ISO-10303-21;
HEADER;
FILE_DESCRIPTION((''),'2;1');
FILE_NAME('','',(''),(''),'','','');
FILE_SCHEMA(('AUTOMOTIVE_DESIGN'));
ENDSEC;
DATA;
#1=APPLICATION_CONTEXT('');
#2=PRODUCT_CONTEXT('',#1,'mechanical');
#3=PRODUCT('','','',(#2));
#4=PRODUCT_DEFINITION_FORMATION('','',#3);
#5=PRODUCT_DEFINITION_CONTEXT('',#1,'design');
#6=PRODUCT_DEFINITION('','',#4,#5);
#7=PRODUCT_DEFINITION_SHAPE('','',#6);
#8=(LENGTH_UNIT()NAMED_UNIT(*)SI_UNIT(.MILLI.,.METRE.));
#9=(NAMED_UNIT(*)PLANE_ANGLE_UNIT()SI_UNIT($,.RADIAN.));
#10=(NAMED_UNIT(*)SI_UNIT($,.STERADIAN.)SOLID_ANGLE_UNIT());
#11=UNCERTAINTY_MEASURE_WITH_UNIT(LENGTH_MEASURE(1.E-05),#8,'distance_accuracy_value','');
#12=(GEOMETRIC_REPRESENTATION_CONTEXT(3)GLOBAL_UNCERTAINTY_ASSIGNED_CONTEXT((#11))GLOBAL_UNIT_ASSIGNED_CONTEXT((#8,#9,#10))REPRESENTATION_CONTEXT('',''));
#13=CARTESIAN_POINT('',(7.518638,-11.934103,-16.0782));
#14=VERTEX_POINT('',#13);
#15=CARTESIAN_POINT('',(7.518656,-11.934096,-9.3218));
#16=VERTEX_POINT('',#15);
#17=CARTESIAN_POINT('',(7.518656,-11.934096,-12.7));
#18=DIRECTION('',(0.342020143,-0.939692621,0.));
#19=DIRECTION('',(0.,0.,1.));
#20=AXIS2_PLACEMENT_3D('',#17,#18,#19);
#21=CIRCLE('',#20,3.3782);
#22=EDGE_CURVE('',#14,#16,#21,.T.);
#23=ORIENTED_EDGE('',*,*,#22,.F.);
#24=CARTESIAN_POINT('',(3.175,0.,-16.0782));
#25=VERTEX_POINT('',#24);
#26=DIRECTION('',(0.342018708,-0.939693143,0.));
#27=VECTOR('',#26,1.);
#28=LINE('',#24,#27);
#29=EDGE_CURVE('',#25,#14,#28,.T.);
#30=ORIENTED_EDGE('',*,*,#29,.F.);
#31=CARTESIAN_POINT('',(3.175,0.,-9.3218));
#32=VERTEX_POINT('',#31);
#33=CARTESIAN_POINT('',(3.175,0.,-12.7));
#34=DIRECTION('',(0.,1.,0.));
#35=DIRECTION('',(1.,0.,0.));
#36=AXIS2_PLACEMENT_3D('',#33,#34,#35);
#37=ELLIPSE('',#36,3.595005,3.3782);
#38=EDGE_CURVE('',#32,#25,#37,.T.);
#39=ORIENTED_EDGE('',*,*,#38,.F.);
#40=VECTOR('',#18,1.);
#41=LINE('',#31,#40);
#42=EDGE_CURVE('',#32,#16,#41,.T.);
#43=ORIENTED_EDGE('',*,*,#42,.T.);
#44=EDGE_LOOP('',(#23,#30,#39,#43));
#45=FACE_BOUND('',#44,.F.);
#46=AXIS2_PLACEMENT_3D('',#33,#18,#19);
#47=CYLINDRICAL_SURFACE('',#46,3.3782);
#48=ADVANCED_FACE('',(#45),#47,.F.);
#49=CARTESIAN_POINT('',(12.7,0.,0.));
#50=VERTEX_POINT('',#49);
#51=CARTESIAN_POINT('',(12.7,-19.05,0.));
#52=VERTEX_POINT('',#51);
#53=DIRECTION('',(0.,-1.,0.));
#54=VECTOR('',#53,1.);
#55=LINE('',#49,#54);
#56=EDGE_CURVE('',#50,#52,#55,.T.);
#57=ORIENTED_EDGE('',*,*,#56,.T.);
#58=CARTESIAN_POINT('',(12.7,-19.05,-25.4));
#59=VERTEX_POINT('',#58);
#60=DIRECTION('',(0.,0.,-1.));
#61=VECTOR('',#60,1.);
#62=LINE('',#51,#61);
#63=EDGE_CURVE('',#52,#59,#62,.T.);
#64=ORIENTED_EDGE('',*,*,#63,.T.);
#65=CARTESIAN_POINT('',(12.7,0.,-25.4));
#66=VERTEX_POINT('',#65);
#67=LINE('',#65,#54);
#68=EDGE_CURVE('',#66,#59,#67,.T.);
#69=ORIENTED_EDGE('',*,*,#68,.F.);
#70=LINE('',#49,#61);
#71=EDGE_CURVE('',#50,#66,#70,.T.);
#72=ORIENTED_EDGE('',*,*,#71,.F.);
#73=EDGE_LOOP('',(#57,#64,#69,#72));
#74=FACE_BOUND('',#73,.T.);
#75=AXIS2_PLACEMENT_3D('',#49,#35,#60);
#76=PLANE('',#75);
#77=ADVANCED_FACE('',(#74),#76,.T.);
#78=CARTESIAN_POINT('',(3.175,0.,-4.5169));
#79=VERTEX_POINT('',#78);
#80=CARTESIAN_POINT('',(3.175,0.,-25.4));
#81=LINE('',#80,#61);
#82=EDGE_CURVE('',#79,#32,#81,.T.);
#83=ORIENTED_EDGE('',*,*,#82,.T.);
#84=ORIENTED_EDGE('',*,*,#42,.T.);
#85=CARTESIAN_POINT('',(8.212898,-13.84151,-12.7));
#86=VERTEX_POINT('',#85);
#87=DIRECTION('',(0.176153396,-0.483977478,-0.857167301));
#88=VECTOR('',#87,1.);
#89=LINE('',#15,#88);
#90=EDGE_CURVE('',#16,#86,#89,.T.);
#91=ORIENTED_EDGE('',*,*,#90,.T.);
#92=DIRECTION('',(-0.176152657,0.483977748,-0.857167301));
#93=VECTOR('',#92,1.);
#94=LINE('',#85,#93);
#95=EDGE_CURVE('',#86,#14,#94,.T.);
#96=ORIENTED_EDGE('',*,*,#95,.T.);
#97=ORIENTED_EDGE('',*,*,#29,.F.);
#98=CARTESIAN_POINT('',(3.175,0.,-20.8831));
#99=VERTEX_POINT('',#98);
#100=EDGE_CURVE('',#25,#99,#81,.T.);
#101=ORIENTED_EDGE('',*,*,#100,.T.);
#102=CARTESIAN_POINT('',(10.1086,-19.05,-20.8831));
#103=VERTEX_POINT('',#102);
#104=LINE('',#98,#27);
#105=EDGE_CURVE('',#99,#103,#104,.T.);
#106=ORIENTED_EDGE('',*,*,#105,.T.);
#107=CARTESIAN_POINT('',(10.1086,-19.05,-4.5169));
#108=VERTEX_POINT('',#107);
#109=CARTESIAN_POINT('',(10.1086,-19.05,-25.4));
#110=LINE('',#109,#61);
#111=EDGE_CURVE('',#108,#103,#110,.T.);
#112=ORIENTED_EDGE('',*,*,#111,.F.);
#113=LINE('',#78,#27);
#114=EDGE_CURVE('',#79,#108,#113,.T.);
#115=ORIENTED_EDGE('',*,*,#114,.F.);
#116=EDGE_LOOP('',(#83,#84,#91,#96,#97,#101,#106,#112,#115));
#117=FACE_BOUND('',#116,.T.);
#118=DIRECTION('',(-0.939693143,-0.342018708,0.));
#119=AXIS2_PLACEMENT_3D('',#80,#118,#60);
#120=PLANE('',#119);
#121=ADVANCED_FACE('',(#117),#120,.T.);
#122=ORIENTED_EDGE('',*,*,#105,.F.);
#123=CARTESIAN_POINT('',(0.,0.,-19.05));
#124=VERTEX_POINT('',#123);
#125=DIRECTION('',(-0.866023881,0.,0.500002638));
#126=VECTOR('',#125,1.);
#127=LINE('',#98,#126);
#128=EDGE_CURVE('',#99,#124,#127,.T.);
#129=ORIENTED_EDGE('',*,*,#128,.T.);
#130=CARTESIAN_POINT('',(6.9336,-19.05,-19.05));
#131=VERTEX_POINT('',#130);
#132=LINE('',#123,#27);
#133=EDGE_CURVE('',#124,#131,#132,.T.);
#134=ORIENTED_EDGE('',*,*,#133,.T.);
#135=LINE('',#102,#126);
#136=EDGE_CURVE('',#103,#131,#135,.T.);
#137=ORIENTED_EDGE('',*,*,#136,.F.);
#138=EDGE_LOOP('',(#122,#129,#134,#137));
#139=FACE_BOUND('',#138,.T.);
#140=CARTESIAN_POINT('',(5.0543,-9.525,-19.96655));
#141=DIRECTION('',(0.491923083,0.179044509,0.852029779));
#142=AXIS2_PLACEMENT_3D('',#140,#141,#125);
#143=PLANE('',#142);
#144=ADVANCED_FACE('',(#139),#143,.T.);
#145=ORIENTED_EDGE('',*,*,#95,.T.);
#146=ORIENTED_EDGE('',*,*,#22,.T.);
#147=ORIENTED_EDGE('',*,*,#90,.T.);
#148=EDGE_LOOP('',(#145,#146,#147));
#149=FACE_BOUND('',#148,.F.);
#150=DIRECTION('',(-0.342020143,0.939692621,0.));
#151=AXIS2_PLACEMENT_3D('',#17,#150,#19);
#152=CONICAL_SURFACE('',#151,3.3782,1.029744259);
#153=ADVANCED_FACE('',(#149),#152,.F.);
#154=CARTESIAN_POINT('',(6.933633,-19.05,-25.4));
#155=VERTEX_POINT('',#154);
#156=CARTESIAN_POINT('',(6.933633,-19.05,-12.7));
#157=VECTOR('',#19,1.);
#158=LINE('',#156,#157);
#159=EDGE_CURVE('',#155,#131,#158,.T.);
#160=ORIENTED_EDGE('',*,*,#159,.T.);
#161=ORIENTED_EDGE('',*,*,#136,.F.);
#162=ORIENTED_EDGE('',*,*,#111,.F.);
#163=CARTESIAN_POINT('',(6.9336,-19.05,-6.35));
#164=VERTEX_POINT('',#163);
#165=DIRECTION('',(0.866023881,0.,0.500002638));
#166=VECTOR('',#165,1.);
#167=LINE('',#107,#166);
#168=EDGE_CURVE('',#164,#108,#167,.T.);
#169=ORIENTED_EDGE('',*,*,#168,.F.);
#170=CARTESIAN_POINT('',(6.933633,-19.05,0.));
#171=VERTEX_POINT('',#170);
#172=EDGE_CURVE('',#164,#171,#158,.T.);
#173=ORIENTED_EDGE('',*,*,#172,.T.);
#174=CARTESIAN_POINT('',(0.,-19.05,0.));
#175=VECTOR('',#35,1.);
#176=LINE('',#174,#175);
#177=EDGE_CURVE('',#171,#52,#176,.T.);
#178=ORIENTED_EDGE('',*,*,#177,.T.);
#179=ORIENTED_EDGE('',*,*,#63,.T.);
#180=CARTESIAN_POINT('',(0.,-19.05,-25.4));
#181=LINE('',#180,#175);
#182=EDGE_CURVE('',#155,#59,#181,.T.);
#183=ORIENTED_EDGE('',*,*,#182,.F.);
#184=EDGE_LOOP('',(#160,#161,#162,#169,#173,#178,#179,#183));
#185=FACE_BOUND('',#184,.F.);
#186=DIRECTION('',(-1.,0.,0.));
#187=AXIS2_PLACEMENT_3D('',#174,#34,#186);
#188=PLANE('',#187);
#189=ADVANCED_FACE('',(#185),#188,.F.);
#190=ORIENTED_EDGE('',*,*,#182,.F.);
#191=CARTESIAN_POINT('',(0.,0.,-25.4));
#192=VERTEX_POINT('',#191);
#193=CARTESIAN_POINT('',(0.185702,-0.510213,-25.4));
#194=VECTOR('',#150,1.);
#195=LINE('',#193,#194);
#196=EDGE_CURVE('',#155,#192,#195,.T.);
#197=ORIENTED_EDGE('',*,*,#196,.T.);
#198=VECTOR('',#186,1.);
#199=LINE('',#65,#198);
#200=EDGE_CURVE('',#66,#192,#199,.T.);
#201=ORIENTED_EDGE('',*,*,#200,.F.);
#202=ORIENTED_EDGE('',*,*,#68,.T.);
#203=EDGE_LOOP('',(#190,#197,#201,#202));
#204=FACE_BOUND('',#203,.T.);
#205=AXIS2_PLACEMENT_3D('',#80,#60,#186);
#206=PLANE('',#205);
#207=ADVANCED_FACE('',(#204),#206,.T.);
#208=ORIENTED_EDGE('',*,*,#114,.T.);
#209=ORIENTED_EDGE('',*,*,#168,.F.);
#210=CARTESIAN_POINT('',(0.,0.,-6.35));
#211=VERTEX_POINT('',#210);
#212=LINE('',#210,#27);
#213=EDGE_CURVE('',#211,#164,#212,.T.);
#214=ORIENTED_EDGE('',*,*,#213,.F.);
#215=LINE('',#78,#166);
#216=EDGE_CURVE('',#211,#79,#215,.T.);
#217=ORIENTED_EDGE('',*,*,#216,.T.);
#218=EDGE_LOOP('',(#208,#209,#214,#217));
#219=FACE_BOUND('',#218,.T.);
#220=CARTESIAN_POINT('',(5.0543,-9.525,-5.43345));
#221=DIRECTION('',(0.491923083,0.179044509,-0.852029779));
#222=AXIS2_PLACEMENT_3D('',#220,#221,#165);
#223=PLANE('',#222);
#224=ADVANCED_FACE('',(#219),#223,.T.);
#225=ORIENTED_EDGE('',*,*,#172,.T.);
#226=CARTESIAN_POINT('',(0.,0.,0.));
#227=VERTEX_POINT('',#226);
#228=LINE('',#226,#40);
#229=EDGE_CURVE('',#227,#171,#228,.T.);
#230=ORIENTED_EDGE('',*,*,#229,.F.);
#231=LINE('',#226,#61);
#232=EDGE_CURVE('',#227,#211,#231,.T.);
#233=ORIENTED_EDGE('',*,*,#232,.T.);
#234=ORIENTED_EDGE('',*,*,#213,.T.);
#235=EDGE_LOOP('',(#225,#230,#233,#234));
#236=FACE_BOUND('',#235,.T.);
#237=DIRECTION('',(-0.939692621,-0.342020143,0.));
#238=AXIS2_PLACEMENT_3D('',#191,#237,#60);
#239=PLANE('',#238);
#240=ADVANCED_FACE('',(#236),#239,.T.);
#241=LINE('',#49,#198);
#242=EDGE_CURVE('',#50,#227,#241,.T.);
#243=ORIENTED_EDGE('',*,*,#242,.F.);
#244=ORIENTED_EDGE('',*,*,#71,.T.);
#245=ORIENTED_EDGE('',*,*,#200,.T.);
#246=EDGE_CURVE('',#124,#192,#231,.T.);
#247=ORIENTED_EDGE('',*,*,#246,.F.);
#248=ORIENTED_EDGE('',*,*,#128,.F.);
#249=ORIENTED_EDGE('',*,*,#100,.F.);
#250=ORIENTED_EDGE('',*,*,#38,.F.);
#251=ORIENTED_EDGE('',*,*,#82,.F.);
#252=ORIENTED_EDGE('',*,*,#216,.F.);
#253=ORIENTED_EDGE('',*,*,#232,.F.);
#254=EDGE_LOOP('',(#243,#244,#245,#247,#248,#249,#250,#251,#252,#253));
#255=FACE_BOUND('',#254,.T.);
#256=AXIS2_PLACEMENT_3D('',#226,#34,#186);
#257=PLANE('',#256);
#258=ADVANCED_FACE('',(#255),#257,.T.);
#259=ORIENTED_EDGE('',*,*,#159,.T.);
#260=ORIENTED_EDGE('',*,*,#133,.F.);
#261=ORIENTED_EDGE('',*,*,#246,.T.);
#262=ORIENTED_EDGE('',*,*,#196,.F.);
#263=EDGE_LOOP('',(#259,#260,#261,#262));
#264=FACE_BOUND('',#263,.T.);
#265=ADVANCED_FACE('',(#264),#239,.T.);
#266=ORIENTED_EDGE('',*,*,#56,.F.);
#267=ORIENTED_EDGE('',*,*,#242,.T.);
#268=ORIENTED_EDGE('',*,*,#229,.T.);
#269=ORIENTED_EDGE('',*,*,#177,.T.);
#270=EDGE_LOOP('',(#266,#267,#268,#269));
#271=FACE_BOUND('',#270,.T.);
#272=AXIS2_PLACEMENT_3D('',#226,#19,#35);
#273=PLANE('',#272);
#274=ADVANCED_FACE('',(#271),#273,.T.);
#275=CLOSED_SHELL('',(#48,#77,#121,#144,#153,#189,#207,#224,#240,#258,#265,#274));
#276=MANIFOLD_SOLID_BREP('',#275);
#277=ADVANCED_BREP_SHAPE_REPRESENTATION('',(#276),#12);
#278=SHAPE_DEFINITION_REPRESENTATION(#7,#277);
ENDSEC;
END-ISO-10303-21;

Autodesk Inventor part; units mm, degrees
ref_plane "YZ Plane" through (0, 0, 0) normal (1, 0, 0) x (0, 1, 0)
ref_plane "XZ Plane" through (0, 0, 0) normal (0, 1, 0) x (-1, 0, 0)
sketch "Sketch1" plane through (0, 0, 0) normal (0, 1, 0) x (-1, 0, 0)
  line L0 (0, 0) -> (-12.7, 0)
  line L1 (-12.7, 0) -> (-12.7, -25.4)
  line L2 (-12.7, -25.4) -> (0, -25.4)
  line L3 (0, -25.4) -> (0, 0)
  line L4 (0, -12.7) -> (-12.7, -12.7) construction
  line L5 (-3.175, -25.4) -> (-3.175, 0)
  line L6 (-3.175, -20.8831) -> (0, -19.05)
  line L7 (-3.175, -4.5169) -> (0, -6.35)
  point P0 (-3.175, -12.7)
  point P1 (0, -6.35)
  dimension "d0" = 12.7
  dimension "d7" = 25.4
  dimension "d34" = 3.175
  dimension "d35" = 60
  dimension "d36" = 12.7
extrude "Extrusion2" add sketch "Sketch1" against normal blind 19.05
sketch "Sketch6" plane through (0, 0, 0) normal (0, 0, 1) x (-1, 0, 0)
  line L0 (0, 0) -> (-12.7, 0) projected
  line L1 (-12.7, 0) -> (-12.7, 19.05) projected
  line L2 (-12.7, 19.05) -> (0, 19.05) projected
  line L3 (0, 0) -> (0, 19.05) projected
  line L4 (0, 0) -> (-6.9336, 19.05)
  dimension "d41" = 70
sweep "Sweep2" cut profiles "Sketch1" path "Sketch6" path curves L4 contours L3 L6 L5 L7
ref_plane "Work Plane5" through (3.175, 0, -25.4) normal (-0.3420201, 0.9396926, 0) x (0, 0, 1)
ref_plane "Work Plane4" through (0, 0, -25.4) normal (0.9396926, 0.3420201, 0) x (0, 0, 1)
sketch "Sketch7" plane through (3.175, 0, -25.4) normal (-0.3420201, 0.9396926, 0) x (0, 0, 1)
  point P0 (12.7, 0)
hole "Hole3" at (3.175, 0, -12.7) direction (0.3420201, -0.9396926, 0) diameter 6.7564 depth 12.7 tip angle 118
split "Split2" plane through (0, 0, -25.4) removes the side toward (-0.9396926, -0.3420201, 0)
equation "\"d41\" = slopeAngle"
equation "\"slopeAngle\" = 70deg"
equation "\"d44\" = -slopeAngle"
properties material "Steel, Alloy"
